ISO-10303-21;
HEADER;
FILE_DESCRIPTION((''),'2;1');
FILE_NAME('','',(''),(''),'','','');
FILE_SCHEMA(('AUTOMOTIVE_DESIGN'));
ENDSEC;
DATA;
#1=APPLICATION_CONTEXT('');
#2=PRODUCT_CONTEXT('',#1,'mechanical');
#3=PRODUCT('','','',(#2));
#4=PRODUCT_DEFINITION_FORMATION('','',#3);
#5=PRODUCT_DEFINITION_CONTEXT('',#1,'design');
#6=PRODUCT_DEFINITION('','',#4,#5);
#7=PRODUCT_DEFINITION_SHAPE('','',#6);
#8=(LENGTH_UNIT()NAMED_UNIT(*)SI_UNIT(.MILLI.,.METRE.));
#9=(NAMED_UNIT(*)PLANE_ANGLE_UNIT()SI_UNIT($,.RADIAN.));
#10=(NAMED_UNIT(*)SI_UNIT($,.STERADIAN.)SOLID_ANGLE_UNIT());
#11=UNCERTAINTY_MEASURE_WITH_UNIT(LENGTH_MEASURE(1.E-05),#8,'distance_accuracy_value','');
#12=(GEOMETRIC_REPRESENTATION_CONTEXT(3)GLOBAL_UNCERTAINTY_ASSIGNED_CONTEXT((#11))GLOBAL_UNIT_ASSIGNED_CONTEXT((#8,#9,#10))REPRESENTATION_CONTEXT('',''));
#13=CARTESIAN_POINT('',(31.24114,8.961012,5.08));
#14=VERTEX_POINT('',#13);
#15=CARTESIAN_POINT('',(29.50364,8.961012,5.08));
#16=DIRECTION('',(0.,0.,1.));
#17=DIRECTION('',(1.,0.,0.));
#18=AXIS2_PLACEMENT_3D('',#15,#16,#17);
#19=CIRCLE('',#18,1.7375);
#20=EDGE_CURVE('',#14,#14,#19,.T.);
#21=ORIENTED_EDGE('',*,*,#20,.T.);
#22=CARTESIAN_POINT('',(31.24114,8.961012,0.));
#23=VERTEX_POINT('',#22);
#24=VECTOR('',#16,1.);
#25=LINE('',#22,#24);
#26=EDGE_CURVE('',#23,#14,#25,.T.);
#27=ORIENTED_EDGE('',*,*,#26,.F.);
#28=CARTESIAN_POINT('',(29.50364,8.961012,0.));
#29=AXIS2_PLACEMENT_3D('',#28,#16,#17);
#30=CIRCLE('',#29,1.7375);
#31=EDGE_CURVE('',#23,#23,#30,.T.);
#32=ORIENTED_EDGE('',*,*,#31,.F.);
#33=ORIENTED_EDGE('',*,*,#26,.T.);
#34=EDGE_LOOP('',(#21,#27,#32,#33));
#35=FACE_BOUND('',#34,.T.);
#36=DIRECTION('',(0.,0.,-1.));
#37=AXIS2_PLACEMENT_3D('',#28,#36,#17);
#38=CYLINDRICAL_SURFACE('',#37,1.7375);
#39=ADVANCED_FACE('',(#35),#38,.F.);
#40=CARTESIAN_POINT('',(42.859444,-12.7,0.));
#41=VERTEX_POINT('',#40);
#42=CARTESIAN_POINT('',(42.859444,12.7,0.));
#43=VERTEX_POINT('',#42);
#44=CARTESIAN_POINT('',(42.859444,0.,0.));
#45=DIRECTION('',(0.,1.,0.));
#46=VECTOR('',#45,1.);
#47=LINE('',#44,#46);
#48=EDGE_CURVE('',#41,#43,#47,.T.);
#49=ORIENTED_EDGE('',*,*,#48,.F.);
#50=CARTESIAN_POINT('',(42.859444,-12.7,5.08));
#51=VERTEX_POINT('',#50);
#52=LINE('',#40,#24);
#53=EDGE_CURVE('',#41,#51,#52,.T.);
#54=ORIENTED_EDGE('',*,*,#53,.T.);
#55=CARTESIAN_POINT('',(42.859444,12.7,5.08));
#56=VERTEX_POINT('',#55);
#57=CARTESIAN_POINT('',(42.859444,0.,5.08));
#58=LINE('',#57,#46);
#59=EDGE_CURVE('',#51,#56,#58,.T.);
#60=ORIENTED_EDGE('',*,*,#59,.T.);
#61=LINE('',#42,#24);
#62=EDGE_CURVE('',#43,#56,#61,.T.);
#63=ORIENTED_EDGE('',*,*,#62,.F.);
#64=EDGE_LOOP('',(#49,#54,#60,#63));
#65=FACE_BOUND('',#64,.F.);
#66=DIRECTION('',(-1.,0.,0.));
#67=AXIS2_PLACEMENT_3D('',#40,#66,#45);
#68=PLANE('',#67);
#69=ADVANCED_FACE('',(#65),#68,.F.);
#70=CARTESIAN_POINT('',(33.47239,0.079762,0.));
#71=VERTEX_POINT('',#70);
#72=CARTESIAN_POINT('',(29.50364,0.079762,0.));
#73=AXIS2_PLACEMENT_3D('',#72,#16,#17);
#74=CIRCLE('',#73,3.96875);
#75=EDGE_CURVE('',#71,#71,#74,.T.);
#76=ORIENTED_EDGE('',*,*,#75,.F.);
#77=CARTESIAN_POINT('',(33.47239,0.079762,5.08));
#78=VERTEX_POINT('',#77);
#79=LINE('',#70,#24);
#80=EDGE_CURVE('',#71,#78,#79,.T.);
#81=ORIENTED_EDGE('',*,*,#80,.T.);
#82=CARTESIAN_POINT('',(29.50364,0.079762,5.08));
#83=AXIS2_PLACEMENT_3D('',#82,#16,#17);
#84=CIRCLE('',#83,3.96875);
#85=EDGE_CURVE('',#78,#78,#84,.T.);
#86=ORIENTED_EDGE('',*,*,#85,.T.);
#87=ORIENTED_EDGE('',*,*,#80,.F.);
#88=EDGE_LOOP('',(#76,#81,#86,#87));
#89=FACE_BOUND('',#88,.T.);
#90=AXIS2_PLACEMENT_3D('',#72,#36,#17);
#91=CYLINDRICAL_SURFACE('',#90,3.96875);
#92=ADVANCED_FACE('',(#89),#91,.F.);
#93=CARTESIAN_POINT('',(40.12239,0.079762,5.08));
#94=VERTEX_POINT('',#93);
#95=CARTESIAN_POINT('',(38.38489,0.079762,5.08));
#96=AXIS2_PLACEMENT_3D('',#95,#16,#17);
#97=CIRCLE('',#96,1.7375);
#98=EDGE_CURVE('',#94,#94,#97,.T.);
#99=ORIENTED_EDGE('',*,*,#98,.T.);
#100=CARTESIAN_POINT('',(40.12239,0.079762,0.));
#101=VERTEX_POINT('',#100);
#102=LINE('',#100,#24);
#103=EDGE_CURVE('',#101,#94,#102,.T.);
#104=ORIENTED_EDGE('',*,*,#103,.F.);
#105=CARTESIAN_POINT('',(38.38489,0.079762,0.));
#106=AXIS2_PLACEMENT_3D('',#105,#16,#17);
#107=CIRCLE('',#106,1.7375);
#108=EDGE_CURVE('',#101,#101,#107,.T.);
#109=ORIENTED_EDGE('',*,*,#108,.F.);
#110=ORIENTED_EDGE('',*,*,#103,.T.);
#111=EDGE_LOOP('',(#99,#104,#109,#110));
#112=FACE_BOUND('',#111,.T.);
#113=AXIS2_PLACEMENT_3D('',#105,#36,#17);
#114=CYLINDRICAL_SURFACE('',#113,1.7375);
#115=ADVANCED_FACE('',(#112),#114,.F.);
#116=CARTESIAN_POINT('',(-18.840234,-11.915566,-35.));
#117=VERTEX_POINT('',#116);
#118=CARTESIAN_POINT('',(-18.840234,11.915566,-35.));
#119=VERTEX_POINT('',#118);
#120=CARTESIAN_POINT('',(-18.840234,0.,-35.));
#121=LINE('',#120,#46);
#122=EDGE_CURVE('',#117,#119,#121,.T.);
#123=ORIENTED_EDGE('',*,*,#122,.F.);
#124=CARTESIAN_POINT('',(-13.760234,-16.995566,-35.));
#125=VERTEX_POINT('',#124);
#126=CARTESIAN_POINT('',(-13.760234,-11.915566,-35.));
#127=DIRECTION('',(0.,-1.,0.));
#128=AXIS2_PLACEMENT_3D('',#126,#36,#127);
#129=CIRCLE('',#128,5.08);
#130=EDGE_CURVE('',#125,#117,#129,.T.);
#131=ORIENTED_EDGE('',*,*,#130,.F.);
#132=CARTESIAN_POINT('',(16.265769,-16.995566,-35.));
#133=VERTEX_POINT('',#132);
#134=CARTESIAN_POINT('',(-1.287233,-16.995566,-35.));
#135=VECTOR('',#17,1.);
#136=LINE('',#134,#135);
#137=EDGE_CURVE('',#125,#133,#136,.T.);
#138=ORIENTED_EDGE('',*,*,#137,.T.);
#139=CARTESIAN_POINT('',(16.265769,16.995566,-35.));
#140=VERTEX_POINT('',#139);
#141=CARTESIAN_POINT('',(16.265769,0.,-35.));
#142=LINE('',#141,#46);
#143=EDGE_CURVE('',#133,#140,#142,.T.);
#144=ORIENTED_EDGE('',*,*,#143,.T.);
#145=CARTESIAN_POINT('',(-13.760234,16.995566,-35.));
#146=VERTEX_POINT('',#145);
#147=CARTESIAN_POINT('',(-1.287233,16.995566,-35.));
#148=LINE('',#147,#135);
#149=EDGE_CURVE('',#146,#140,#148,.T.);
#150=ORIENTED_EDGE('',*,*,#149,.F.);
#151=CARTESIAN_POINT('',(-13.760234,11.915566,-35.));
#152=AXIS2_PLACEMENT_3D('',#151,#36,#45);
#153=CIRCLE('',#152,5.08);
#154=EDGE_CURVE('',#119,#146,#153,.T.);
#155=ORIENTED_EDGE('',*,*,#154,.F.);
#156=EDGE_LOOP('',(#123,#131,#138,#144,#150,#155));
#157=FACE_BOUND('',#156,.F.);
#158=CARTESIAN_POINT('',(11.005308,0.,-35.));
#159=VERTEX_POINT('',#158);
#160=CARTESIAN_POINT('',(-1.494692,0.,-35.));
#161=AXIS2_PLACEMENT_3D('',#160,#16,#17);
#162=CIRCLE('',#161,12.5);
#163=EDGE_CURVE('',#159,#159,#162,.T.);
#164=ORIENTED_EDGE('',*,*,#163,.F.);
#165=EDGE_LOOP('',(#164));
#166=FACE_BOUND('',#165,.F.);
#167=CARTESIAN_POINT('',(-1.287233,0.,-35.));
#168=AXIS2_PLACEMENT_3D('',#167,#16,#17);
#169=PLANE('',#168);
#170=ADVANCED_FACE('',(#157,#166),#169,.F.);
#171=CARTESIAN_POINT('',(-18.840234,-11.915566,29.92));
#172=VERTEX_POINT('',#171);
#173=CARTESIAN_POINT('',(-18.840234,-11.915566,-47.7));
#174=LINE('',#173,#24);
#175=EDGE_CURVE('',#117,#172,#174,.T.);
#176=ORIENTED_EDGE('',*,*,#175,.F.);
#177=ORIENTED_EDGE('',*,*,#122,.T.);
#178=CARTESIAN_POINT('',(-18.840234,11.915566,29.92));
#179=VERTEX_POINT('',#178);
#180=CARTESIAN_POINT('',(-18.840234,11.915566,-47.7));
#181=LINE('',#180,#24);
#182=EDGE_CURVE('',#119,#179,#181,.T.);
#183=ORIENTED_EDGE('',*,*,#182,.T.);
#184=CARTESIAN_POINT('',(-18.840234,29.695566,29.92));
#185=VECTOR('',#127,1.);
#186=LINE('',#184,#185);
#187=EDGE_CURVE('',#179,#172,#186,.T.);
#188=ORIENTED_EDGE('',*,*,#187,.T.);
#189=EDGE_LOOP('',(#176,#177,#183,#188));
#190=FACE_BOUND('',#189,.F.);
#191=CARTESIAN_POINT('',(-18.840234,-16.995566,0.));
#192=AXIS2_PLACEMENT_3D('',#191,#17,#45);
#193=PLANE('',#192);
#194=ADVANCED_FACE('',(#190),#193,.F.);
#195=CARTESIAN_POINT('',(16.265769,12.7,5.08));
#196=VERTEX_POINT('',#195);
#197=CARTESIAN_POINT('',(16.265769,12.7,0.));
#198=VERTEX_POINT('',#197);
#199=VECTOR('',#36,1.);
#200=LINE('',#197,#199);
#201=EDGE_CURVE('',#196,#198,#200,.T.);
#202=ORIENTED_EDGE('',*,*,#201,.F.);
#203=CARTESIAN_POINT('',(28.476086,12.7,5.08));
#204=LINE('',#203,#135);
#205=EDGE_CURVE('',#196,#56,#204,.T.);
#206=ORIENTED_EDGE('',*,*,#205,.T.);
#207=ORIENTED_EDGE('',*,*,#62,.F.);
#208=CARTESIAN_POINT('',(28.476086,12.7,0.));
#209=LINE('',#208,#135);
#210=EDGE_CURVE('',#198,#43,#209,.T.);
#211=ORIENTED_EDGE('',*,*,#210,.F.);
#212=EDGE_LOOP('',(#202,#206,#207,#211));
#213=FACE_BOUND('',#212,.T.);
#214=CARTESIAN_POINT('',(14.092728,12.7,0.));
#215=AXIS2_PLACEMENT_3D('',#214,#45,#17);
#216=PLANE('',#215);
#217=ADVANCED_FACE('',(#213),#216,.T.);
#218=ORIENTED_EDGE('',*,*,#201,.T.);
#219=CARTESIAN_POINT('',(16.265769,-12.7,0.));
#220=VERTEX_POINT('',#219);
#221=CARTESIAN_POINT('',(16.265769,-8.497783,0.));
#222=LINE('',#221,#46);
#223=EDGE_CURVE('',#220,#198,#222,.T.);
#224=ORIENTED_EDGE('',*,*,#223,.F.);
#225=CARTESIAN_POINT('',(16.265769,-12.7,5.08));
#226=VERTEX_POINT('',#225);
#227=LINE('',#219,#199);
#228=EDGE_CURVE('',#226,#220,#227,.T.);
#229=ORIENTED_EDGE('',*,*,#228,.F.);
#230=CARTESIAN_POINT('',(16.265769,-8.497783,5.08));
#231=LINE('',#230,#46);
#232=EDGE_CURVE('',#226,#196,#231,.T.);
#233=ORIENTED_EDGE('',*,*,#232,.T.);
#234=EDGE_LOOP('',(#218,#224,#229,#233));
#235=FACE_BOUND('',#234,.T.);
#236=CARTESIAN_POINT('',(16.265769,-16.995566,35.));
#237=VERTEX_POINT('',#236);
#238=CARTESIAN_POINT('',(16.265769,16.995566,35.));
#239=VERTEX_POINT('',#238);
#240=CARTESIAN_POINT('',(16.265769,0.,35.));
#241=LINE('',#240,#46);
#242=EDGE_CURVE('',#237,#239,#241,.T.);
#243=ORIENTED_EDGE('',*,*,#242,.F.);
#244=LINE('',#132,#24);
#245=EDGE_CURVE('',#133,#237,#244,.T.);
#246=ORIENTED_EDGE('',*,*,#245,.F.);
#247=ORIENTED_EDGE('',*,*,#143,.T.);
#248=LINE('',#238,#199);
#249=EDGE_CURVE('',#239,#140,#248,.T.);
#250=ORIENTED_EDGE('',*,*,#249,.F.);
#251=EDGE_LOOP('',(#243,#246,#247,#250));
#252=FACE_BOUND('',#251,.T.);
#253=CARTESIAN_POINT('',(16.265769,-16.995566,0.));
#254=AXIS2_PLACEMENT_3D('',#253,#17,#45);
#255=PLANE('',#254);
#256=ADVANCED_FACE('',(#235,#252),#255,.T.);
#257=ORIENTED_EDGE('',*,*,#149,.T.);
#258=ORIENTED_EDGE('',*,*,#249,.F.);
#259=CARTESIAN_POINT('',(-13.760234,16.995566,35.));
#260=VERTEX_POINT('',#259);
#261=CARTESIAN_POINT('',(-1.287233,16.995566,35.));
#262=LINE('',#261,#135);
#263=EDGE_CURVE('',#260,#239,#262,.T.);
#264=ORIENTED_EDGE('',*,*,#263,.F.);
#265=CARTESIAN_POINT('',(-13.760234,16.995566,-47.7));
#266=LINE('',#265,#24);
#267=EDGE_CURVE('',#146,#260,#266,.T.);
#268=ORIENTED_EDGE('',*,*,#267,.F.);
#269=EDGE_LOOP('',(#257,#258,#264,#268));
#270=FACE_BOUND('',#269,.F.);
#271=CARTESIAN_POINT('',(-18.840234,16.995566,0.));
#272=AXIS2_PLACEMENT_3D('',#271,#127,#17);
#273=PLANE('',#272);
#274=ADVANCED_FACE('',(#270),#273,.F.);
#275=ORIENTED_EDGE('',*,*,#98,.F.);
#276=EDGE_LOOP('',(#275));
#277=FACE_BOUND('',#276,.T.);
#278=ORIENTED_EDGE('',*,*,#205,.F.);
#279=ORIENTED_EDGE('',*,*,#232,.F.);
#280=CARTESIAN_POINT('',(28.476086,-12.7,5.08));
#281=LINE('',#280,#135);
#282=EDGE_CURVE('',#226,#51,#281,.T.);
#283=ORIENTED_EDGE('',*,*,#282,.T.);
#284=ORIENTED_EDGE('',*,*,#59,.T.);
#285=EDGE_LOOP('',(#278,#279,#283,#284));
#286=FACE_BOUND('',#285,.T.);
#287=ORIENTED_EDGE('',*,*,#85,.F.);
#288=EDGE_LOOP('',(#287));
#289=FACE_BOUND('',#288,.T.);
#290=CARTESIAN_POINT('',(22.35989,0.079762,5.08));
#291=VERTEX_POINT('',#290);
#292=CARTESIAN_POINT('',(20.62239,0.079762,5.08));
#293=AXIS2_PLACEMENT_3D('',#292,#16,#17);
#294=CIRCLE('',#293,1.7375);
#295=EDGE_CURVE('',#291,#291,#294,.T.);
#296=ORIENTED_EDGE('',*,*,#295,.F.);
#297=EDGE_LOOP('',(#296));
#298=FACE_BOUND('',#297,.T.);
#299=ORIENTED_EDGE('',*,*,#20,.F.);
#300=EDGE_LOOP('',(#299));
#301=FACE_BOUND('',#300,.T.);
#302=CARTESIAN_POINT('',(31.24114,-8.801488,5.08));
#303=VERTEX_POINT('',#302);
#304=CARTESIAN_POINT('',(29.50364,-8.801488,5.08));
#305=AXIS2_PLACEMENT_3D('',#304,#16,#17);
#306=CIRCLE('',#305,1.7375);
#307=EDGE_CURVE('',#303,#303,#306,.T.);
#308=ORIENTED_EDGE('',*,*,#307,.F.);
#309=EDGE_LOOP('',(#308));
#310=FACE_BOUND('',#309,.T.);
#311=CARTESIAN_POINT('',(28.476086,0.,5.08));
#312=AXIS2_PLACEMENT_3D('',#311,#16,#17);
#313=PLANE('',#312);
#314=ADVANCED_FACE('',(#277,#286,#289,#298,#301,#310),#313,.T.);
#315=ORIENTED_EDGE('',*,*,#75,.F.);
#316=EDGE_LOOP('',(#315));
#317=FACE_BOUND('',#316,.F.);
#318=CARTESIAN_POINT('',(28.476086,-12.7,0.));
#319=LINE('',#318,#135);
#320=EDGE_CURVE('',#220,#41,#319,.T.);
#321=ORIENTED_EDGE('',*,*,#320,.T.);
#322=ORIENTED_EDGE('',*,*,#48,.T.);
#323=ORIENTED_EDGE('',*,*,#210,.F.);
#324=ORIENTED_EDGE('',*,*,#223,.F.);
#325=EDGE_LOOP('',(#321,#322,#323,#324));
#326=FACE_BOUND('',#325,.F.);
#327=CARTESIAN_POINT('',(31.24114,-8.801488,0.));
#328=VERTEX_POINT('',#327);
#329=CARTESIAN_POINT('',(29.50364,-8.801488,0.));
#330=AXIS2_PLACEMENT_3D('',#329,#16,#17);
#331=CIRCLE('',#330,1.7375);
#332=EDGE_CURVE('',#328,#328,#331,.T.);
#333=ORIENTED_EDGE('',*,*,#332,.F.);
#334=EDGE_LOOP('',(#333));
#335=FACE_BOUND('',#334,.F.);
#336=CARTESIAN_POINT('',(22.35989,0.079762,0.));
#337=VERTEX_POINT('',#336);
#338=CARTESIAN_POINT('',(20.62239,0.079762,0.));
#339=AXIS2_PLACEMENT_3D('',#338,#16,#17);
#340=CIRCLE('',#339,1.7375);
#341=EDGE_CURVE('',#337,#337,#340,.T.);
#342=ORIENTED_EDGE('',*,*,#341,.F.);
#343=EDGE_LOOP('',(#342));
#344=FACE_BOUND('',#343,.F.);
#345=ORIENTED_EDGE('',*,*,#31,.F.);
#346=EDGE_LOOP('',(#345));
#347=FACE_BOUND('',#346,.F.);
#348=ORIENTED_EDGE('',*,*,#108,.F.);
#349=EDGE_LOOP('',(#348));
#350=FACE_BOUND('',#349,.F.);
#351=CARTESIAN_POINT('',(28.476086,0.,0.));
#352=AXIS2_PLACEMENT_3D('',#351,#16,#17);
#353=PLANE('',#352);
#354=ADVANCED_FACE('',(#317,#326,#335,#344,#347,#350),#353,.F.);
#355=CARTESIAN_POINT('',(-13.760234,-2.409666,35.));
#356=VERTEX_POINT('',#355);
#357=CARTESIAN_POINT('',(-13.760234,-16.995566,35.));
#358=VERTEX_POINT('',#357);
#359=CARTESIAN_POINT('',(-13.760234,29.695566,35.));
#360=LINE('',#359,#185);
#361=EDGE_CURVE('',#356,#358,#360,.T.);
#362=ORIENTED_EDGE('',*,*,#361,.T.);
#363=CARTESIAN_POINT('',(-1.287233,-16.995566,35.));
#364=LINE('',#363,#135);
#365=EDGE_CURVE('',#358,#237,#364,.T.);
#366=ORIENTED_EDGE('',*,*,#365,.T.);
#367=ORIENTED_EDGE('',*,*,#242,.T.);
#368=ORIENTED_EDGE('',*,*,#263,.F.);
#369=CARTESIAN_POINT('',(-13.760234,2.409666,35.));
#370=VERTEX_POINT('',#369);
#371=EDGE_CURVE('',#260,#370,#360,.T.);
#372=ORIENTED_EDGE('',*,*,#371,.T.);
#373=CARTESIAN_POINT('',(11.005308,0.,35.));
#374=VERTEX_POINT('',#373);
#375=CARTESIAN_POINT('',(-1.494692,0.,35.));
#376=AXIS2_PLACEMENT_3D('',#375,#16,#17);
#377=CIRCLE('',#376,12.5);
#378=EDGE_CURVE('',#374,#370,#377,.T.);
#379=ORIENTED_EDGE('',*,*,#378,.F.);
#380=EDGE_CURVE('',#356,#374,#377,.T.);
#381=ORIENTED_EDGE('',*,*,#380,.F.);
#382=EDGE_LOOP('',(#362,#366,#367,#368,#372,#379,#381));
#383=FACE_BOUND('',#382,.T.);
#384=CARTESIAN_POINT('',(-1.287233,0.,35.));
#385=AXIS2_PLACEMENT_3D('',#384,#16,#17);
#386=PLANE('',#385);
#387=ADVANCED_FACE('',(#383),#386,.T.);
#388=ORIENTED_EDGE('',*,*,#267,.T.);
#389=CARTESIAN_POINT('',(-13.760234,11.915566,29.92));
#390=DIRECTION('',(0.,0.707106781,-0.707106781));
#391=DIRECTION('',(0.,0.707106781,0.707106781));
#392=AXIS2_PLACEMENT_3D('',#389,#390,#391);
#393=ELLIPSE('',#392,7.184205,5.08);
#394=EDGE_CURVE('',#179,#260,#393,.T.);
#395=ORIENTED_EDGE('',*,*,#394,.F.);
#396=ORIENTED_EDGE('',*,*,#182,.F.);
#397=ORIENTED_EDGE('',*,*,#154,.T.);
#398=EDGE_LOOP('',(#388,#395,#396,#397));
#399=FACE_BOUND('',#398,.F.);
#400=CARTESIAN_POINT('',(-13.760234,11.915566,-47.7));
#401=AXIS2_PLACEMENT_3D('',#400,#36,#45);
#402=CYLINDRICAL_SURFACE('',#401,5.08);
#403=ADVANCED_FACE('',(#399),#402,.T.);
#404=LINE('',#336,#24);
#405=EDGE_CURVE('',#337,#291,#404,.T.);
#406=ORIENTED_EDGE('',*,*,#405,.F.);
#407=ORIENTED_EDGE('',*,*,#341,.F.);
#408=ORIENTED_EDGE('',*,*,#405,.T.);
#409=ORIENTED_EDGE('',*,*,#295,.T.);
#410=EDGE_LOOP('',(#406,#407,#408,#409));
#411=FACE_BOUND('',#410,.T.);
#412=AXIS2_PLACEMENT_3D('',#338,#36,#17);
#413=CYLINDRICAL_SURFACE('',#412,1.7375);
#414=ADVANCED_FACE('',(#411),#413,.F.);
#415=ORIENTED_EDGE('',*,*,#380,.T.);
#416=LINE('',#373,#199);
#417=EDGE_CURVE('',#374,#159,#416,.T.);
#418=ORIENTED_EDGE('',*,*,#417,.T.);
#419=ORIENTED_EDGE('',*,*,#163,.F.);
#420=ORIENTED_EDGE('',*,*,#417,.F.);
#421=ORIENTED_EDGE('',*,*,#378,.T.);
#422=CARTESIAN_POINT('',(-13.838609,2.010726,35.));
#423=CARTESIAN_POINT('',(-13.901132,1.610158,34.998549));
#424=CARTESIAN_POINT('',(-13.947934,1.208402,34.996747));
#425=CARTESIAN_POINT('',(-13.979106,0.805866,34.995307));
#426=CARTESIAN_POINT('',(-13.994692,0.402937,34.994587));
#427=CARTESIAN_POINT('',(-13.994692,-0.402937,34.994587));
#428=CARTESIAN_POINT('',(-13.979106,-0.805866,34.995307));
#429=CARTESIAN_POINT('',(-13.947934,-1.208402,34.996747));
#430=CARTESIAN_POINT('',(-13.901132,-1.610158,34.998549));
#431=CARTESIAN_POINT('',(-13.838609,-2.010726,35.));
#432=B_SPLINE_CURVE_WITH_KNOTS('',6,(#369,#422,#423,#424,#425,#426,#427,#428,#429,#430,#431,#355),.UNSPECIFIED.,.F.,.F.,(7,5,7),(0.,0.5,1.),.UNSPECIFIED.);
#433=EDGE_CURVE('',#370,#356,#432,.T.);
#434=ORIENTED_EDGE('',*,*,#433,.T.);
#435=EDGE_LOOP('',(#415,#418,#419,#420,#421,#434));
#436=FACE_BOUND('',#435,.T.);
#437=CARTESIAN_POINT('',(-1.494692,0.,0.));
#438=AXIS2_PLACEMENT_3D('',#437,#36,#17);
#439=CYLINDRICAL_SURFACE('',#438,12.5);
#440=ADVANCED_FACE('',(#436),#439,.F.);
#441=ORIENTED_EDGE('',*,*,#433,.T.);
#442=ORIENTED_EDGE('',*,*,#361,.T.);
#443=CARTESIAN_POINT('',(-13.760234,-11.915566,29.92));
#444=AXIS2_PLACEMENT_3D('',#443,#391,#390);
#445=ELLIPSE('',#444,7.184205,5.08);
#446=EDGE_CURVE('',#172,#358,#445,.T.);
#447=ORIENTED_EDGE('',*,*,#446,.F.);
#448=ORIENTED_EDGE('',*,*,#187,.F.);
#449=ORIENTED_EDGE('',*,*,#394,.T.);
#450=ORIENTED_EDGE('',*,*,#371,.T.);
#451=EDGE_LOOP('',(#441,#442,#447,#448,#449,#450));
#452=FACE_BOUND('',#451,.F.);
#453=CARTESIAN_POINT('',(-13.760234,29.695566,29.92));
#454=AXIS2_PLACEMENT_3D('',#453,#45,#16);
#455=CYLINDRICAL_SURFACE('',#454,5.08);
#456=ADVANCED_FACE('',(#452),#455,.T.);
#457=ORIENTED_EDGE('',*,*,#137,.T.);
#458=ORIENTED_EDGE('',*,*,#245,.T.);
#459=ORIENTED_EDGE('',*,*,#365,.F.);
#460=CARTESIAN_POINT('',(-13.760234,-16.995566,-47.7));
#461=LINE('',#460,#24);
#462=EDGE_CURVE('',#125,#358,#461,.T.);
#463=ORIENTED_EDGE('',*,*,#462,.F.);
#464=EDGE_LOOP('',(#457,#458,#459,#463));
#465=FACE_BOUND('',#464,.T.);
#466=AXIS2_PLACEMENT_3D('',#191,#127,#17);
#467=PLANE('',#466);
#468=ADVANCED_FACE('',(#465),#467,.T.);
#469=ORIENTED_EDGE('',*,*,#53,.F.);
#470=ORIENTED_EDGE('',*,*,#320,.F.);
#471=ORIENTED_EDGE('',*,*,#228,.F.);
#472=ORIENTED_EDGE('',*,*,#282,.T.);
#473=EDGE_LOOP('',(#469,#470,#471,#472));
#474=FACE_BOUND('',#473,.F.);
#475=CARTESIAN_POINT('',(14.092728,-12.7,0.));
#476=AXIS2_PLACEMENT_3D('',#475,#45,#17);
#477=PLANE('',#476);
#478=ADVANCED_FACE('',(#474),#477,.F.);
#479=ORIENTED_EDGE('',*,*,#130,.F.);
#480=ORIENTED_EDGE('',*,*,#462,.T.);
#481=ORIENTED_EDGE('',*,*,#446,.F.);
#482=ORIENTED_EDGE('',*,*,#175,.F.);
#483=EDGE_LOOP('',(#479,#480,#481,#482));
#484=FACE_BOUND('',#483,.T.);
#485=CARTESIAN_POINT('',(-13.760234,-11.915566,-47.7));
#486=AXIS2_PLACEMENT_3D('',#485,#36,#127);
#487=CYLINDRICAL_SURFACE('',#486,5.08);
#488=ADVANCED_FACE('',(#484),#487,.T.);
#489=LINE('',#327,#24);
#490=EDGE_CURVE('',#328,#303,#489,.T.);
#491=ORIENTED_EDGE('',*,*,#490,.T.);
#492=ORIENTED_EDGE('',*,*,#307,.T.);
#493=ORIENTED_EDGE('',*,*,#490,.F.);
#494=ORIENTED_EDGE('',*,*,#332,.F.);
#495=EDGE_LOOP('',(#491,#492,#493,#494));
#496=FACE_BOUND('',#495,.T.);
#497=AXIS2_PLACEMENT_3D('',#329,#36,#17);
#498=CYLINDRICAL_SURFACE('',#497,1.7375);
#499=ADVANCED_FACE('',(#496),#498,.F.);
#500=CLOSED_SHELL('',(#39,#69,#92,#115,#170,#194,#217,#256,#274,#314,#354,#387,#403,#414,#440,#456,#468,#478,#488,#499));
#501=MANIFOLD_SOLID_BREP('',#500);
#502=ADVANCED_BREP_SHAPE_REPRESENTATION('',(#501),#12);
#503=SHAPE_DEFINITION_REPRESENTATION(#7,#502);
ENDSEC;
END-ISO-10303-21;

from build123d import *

# Parameters (mm, degrees)
F0_W        = 28.7667152895
F0_H        = 25.4
F0_R        = 1.7375
F0_R_2      = 3.96875
F1_DEPTH    = 5.08
F2_W        = 35.1060024381
F2_H        = 33.9911315718
F2_R        = 12.5
F3_DEPTH    = 35
F4_T1_DEPTH = 59.3911315718
F4_T3_DEPTH = 95.4


# Not quite as in the source:
# - a fillet or chamfer that OpenCascade refuses, or shapes differently, is made with other operations: its cross-section is extruded or revolved along the edge and cut away or added
# - a feature names something its author has since deleted; it is built from what else it names


with BuildPart() as f1:
    # F0 (on Top) → F1 (new body)
    with BuildSketch(Plane.XY):
        with Locations((28.4760861403, 0)):
            Rectangle(F0_W, F0_H)
        with Locations((29.5036397874, -8.8014880077)):
            Circle(F0_R, mode=Mode.SUBTRACT)
        with Locations((20.6223897874, 0.0797619923)):
            Circle(F0_R, mode=Mode.SUBTRACT)
        with Locations((29.5036397874, 0.0797619923)):
            Circle(F0_R_2, mode=Mode.SUBTRACT)
        with Locations((38.3848897874, 0.0797619923)):
            Circle(F0_R, mode=Mode.SUBTRACT)
        with Locations((29.5036397874, 8.9610119923)):
            Circle(F0_R, mode=Mode.SUBTRACT)
    extrude(amount=F1_DEPTH)

    # F2 (on Top) → F3 (join, symmetric)
    with BuildSketch(Plane.XY):
        with Locations((-1.2872326612, 0)):
            Rectangle(F2_W, F2_H)
        with Locations((-1.4946922893, 0)):
            Circle(F2_R, mode=Mode.SUBTRACT)
    extrude(amount=F3_DEPTH, both=True)

    # F4: fillet of radius 5.08 on 3 edges, made by hand

    # F4_s2 → F4_t1 (cut)
    with BuildSketch(Plane.XZ.offset(-29.6955657859)):
        with BuildLine():
            ThreePointArc((-13.7602338803, 35), (-17.3523363287, 33.5121024484), (-18.8402338803, 29.92))
            Line((-18.8402338803, 29.92), (-18.8402338803, 35))
            Line((-18.8402338803, 35), (-13.7602338803, 35))
        make_face()
    extrude(amount=F4_T1_DEPTH, mode=Mode.SUBTRACT)

    # F4_s4 → F4_t3 (cut)
    with BuildSketch(Plane.XY.offset(-47.7)):
        with BuildLine():
            ThreePointArc((-13.7602338803, -16.9955657859), (-17.3523363287, -15.5076682343), (-18.8402338803, -11.9155657859))
            Line((-18.8402338803, -11.9155657859), (-18.8402338803, -16.9955657859))
            Line((-18.8402338803, -16.9955657859), (-13.7602338803, -16.9955657859))
        make_face()
        with BuildLine():
            ThreePointArc((-13.7602338803, 16.9955657859), (-17.3523363287, 15.5076682343), (-18.8402338803, 11.9155657859))
            Line((-18.8402338803, 11.9155657859), (-18.8402338803, 16.9955657859))
            Line((-18.8402338803, 16.9955657859), (-13.7602338803, 16.9955657859))
        make_face()
    extrude(amount=F4_T3_DEPTH, mode=Mode.SUBTRACT)


solid = f1.part
